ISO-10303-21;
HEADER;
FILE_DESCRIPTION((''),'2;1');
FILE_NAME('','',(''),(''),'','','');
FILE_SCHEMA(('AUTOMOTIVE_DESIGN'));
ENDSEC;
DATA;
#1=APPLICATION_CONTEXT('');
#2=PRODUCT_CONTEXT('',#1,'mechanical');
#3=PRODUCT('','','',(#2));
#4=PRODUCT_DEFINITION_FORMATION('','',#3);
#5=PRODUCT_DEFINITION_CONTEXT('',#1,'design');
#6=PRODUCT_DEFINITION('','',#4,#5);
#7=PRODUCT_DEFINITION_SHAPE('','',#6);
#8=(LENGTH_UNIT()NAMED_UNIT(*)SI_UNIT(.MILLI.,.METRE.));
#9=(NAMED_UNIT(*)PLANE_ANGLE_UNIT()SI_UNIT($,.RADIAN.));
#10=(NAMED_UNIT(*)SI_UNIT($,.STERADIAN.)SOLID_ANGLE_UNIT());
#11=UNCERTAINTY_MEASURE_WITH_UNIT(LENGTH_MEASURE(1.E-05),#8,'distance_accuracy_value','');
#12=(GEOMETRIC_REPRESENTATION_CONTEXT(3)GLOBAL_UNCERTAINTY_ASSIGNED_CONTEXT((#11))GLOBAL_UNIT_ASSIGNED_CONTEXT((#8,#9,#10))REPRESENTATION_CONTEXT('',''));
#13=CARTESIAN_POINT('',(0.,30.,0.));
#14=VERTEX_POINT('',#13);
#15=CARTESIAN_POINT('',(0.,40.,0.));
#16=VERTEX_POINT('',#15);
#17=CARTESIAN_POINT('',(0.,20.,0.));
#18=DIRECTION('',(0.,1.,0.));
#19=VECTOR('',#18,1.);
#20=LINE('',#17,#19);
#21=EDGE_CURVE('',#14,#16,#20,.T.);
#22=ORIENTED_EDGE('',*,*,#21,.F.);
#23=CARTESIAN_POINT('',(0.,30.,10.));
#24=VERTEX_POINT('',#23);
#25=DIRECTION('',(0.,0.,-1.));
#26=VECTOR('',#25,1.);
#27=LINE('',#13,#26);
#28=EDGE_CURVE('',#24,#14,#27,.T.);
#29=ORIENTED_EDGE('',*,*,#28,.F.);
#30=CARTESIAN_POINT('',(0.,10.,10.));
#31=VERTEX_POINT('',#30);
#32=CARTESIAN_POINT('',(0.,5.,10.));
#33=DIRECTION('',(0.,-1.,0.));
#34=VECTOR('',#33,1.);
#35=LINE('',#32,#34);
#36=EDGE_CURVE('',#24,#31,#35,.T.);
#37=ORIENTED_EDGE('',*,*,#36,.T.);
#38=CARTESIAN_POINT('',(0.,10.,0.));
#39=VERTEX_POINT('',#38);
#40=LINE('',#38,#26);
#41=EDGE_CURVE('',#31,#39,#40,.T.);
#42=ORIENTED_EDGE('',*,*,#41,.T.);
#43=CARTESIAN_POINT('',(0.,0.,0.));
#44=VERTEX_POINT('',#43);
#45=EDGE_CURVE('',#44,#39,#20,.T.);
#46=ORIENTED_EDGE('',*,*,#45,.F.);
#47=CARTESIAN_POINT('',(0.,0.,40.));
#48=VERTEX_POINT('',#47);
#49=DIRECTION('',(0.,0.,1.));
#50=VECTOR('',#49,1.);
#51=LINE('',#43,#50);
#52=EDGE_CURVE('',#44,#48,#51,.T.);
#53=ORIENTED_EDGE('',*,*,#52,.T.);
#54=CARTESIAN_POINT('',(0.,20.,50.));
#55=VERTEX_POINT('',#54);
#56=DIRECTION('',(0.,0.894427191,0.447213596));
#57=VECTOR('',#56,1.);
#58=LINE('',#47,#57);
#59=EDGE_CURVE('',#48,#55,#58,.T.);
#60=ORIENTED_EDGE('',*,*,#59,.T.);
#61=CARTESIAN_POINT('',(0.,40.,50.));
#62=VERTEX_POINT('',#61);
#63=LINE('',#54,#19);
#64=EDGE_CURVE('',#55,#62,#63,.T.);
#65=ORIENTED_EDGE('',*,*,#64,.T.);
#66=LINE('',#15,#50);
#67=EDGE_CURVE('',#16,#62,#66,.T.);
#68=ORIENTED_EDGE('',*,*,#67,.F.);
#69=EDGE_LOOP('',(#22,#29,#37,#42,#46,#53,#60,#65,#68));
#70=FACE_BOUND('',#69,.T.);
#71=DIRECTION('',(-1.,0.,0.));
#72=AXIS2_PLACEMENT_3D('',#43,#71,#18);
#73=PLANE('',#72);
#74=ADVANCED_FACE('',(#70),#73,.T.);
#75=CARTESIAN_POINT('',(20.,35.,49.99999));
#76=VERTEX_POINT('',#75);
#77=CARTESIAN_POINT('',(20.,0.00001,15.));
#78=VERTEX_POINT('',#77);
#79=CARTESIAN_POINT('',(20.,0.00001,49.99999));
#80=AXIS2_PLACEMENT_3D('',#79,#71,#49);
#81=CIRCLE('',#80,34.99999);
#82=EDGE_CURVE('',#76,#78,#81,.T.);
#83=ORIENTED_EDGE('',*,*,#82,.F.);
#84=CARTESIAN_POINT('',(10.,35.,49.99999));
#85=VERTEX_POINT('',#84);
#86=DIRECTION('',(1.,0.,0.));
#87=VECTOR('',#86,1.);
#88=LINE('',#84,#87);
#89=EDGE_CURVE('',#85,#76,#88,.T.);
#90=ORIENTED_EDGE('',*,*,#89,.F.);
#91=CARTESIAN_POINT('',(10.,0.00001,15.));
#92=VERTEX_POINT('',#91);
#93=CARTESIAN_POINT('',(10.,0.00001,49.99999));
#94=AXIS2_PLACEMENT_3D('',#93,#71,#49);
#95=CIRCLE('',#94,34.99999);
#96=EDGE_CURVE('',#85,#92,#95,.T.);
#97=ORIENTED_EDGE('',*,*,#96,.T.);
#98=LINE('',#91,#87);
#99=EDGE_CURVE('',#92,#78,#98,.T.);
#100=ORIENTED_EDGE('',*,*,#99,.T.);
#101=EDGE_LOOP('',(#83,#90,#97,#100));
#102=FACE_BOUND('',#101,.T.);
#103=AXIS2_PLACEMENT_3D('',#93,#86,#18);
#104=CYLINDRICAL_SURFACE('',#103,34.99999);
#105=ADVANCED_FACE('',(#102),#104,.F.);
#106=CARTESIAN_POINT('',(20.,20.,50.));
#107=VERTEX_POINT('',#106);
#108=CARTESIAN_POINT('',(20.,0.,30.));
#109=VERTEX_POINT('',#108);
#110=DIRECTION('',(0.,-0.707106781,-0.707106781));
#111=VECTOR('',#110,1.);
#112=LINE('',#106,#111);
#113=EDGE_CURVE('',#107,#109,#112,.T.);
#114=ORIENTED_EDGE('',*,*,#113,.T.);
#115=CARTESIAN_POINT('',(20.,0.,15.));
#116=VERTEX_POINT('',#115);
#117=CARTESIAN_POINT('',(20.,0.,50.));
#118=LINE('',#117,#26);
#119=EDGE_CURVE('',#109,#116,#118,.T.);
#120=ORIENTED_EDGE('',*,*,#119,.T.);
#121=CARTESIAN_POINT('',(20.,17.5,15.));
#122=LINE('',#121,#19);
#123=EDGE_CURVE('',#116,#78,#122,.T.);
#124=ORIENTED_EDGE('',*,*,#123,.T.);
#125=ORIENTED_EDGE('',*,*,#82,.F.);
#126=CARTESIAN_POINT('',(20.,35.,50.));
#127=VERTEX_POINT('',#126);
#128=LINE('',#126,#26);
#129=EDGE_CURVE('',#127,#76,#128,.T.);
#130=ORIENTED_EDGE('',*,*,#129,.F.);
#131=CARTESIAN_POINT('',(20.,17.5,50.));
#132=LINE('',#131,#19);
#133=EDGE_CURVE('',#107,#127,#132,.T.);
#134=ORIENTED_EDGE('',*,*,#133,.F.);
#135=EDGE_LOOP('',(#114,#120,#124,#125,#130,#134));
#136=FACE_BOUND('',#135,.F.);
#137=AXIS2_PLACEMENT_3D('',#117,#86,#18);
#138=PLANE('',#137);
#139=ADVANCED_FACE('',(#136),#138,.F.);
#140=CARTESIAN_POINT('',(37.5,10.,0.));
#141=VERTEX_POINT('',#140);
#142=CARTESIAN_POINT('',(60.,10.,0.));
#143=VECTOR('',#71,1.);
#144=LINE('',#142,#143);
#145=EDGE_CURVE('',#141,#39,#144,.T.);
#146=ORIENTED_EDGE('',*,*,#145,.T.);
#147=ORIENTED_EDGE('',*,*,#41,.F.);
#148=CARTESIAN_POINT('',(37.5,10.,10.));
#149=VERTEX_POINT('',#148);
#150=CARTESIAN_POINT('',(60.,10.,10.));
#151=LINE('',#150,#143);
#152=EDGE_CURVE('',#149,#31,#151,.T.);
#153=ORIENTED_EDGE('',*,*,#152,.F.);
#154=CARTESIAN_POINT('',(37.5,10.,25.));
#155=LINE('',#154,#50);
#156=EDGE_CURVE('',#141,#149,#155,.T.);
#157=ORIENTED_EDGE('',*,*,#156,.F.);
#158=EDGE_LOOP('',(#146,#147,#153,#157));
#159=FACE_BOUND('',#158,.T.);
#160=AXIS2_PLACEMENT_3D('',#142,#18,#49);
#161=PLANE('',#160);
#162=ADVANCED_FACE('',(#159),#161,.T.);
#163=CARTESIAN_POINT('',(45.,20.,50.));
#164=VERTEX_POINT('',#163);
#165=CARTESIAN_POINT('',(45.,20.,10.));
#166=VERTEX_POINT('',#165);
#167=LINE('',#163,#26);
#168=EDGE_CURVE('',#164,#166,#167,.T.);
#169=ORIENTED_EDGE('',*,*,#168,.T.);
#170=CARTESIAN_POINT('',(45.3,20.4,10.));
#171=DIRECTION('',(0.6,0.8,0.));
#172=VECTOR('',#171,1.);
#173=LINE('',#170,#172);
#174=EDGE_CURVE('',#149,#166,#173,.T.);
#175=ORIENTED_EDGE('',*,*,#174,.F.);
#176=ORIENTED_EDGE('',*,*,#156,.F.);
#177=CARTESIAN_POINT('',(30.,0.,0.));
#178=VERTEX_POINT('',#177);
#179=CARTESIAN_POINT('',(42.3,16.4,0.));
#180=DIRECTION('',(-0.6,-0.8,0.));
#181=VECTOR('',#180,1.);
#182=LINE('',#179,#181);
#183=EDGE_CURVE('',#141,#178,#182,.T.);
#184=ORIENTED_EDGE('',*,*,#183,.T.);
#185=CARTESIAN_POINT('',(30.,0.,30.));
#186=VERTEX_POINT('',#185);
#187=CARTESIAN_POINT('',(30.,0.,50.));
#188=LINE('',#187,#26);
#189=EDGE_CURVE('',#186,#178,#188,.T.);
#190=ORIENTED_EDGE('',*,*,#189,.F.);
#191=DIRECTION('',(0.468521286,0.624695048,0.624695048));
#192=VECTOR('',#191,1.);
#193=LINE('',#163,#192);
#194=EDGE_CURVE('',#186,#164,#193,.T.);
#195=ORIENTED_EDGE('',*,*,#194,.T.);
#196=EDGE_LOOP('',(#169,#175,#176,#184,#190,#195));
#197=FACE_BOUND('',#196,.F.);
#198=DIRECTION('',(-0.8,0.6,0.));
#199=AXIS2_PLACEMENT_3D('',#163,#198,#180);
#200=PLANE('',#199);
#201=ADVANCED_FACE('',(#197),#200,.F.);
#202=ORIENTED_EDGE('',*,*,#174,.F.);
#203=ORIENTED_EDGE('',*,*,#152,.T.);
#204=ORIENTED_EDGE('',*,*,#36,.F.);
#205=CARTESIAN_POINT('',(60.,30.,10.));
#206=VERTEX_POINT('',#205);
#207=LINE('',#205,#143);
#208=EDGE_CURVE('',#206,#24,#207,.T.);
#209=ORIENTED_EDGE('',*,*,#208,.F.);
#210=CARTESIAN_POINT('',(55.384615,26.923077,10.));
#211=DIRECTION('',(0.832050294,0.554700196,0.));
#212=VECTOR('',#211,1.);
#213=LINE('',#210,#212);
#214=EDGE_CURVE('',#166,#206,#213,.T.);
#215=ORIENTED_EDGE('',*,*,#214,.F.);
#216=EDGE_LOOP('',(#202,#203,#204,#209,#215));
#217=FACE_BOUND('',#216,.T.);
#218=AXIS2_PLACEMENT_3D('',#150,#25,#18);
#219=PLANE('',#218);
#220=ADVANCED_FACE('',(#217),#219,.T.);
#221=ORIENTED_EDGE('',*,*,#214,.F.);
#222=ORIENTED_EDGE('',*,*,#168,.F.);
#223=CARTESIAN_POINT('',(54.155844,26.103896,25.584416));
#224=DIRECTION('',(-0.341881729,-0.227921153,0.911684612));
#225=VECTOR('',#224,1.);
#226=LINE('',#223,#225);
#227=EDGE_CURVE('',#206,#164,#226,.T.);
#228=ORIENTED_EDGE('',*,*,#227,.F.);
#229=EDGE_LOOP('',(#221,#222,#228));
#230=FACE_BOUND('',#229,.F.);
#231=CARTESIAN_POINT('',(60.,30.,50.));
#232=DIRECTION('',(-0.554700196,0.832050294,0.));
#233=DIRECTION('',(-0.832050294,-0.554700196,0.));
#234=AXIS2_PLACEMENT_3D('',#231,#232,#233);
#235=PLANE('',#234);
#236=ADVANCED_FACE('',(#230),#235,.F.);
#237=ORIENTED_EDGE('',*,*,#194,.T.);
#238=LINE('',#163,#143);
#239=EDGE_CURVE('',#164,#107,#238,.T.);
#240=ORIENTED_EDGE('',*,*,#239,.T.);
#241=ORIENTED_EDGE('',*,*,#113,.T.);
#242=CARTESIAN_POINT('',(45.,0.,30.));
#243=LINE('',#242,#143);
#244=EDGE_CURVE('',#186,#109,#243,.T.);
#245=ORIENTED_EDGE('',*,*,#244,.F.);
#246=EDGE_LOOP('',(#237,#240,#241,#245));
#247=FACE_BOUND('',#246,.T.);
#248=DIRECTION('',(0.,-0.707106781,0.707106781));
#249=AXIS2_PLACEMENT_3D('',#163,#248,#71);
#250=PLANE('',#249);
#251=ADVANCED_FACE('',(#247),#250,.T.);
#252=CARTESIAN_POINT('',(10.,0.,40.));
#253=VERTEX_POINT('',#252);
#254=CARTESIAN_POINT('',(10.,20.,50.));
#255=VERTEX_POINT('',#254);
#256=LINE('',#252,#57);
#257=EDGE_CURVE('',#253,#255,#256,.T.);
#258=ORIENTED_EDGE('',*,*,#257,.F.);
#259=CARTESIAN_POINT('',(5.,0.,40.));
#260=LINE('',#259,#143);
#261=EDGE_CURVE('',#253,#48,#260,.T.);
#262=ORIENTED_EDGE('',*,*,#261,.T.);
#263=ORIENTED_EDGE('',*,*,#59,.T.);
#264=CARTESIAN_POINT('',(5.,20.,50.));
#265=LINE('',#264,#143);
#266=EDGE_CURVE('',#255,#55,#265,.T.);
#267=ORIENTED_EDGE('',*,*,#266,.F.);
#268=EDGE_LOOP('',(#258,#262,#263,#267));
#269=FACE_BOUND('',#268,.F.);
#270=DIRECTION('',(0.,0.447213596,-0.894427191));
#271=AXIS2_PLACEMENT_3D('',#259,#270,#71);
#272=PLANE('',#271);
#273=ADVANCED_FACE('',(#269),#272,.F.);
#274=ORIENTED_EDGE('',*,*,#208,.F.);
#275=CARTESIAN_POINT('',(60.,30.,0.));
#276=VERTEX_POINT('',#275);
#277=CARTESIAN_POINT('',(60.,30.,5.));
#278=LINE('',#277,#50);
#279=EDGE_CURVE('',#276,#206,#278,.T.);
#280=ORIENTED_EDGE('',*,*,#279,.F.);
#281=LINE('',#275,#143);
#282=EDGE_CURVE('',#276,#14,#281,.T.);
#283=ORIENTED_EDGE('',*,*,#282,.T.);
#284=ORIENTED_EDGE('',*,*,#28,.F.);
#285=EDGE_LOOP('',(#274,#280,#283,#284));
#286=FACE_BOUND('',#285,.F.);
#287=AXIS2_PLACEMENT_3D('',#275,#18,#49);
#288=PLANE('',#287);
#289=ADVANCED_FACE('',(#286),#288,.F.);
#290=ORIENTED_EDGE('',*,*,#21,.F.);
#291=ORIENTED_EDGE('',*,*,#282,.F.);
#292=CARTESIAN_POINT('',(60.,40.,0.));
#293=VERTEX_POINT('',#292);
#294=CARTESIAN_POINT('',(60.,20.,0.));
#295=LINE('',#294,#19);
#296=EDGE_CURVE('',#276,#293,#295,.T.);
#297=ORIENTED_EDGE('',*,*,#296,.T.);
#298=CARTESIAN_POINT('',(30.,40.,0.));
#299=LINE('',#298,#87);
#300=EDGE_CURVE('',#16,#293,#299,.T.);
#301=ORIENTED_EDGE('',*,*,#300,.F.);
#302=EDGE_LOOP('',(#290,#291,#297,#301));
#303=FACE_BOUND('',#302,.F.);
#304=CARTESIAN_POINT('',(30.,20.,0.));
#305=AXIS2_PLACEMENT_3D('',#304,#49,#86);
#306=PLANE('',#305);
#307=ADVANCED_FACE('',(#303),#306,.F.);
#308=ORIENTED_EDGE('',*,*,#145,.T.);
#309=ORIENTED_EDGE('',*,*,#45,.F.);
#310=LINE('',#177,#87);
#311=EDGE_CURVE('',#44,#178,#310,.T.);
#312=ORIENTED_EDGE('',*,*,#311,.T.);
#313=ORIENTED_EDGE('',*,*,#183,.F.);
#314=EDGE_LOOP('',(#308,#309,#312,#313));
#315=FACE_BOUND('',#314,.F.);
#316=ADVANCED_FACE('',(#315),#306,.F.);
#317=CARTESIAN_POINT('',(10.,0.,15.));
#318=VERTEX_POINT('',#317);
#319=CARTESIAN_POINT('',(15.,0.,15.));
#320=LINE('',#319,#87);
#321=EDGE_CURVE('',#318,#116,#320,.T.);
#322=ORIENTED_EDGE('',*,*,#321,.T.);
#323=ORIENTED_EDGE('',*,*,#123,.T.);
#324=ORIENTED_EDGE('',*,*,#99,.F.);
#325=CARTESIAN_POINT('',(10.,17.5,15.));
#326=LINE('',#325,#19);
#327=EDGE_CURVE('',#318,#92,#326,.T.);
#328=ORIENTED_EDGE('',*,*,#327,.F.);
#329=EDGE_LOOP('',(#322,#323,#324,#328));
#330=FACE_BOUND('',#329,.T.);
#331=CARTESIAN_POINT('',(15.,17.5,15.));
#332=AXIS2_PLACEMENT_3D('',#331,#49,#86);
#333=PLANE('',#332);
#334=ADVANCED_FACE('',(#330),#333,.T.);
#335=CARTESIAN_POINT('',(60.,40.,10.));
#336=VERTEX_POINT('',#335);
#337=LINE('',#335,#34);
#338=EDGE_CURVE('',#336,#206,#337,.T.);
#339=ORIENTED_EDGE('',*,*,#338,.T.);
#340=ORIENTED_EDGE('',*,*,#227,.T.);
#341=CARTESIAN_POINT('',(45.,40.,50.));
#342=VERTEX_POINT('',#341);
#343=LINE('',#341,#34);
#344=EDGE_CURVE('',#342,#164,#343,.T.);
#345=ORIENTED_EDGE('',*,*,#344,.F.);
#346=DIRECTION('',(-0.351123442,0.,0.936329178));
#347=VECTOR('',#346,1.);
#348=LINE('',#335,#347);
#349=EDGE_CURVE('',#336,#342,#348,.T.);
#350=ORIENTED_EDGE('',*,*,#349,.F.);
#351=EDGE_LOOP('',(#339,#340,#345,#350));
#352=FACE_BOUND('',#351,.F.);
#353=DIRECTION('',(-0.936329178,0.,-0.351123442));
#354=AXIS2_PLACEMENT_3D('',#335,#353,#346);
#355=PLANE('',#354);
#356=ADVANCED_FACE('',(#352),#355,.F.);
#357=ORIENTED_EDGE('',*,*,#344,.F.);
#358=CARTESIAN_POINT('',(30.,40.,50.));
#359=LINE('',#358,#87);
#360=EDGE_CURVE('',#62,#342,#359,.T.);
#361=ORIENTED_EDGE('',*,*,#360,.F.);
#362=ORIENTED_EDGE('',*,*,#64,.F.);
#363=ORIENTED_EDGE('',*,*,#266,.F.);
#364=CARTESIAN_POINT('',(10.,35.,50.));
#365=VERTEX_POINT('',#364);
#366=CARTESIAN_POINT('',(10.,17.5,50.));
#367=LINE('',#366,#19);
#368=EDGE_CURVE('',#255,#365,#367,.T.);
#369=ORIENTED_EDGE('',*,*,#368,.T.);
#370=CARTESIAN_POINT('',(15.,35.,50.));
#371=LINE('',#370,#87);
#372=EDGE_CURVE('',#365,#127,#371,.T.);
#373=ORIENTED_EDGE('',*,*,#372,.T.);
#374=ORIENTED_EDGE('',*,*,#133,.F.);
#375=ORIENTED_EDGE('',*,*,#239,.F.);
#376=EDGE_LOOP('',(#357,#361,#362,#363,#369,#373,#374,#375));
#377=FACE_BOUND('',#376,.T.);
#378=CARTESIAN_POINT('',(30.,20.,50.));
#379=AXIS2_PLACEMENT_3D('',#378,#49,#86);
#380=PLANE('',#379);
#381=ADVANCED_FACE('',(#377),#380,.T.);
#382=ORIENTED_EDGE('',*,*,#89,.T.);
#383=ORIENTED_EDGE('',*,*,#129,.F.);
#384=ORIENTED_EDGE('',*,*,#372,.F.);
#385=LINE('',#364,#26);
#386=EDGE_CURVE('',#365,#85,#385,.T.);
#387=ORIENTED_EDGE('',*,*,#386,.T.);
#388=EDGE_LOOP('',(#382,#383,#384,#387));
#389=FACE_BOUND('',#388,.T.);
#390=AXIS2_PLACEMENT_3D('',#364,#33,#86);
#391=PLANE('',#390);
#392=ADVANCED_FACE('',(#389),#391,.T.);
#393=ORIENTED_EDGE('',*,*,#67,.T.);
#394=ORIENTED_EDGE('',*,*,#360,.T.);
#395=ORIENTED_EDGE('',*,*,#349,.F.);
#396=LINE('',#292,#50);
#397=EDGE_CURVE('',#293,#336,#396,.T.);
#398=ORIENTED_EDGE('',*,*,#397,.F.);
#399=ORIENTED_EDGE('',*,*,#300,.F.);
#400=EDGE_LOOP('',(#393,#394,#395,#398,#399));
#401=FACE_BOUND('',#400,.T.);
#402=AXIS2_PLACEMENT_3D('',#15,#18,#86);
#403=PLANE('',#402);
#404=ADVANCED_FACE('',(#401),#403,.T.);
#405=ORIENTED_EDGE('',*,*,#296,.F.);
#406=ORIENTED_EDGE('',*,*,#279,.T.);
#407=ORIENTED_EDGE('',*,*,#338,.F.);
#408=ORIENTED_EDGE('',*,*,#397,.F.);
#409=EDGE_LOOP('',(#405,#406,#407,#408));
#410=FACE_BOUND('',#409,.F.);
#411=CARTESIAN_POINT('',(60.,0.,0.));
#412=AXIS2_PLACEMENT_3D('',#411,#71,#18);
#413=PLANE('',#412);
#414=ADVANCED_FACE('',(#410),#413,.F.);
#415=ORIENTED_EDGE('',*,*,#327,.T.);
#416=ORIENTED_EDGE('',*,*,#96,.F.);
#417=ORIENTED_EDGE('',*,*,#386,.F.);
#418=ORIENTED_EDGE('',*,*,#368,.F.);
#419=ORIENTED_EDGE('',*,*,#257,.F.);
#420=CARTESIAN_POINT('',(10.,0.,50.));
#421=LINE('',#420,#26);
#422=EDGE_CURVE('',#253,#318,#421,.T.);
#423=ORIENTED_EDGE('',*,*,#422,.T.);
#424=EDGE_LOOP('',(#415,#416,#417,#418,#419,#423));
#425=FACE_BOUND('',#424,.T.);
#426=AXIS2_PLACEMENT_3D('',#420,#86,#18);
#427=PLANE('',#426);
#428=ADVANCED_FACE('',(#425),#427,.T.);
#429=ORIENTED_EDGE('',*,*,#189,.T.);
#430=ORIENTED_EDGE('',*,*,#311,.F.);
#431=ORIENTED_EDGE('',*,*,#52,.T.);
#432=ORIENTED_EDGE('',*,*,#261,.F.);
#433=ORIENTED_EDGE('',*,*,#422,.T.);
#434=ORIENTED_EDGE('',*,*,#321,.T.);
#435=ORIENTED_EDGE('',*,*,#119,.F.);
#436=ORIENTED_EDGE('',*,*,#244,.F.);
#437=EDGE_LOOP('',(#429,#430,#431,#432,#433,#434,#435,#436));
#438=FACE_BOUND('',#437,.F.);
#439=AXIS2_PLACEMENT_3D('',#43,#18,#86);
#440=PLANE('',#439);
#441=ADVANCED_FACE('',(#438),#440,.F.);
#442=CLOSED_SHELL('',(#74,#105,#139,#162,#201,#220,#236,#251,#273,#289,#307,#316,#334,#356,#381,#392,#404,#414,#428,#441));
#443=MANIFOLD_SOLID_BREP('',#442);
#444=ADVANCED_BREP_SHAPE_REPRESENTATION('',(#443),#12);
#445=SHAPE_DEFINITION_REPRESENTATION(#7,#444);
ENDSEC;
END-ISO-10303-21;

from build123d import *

# Parameters (mm, degrees)
F0_W      = 60
F0_H      = 40
F1_DEPTH  = 50
F2_W      = 20
F2_H      = 10
F3_DEPTH  = 60.001
F5_DEPTH  = 50.001
F9_W      = 10
F9_H      = 35
F10_DEPTH = 35
F11_R     = 34.99999
F12_W     = 10
F12_H     = 20
F16_DEPTH = 40.001


# Not quite as in the source:
# - a fillet or chamfer is up to 0.001 mm smaller than in the source, because OpenCascade refuses the exact size


with BuildPart() as f1:
    # F0 (on Top) → F1 (new body)
    with BuildSketch(Plane.XY):
        with Locations((30, 20)):
            Rectangle(F0_W, F0_H)
    extrude(amount=F1_DEPTH)

    # F2 (on face) → F3 (cut, through all)
    with BuildSketch(Plane.YZ.offset(60)):
        with Locations((20, 5)):
            Rectangle(F2_W, F2_H)
    extrude(amount=-F3_DEPTH, mode=Mode.SUBTRACT)

    # F4 (on face) → F5 (cut, through all)
    with BuildSketch(Plane.XY.offset(50)):
        Polygon((45, 20), (30, 0), (60, 0), (60, 10), (60, 30), align=None)
    extrude(amount=-F5_DEPTH, mode=Mode.SUBTRACT)

    # F8: sweep along a path in F7
    with BuildLine(Plane.YZ.offset(60)) as f8_path:
        Line((20, 50), (0, 30))
    # F6 (on face) → F8 (sweep, cut)
    with BuildSketch(Plane.XY.offset(50)):
        Polygon((30, 0), (45, 20), (20, 20), (20, 0), align=None)
    sweep(path=f8_path.line, mode=Mode.SUBTRACT)

    # F9 (on face) → F10 (cut)
    with BuildSketch(Plane.XY.offset(50)):
        with Locations((15, 17.5)):
            Rectangle(F9_W, F9_H)
    extrude(amount=-F10_DEPTH, mode=Mode.SUBTRACT)

    # F11 (radius 35 in the source; OpenCascade refuses exactly that, so slightly less here)
    f11_edges = [f1.edges().sort_by_distance(p)[0] for p in [
        (15, 35, 15),
    ]]
    fillet(f11_edges, radius=F11_R)

    # F14: sweep along a path in F13
    with BuildLine(Plane(origin=(0, 0, 0), x_dir=(0, -1, 0), z_dir=(-1, 0, 0))) as f14_path:
        Line((0, 40), (-20, 50))
    # F12 (on face) → F14 (sweep, cut)
    with BuildSketch(Plane.XY.offset(50)):
        with Locations((5, 10)):
            Rectangle(F12_W, F12_H)
    sweep(path=f14_path.line, mode=Mode.SUBTRACT)

    # F15 (on face) → F16 (cut, through all)
    with BuildSketch(Plane(origin=(0, 40, 0), x_dir=(-1, 0, 0), z_dir=(0, 1, 0))):
        Polygon((-60, 10), (-45, 50), (-60, 50), align=None)
    extrude(amount=-F16_DEPTH, mode=Mode.SUBTRACT)


solid = f1.part
